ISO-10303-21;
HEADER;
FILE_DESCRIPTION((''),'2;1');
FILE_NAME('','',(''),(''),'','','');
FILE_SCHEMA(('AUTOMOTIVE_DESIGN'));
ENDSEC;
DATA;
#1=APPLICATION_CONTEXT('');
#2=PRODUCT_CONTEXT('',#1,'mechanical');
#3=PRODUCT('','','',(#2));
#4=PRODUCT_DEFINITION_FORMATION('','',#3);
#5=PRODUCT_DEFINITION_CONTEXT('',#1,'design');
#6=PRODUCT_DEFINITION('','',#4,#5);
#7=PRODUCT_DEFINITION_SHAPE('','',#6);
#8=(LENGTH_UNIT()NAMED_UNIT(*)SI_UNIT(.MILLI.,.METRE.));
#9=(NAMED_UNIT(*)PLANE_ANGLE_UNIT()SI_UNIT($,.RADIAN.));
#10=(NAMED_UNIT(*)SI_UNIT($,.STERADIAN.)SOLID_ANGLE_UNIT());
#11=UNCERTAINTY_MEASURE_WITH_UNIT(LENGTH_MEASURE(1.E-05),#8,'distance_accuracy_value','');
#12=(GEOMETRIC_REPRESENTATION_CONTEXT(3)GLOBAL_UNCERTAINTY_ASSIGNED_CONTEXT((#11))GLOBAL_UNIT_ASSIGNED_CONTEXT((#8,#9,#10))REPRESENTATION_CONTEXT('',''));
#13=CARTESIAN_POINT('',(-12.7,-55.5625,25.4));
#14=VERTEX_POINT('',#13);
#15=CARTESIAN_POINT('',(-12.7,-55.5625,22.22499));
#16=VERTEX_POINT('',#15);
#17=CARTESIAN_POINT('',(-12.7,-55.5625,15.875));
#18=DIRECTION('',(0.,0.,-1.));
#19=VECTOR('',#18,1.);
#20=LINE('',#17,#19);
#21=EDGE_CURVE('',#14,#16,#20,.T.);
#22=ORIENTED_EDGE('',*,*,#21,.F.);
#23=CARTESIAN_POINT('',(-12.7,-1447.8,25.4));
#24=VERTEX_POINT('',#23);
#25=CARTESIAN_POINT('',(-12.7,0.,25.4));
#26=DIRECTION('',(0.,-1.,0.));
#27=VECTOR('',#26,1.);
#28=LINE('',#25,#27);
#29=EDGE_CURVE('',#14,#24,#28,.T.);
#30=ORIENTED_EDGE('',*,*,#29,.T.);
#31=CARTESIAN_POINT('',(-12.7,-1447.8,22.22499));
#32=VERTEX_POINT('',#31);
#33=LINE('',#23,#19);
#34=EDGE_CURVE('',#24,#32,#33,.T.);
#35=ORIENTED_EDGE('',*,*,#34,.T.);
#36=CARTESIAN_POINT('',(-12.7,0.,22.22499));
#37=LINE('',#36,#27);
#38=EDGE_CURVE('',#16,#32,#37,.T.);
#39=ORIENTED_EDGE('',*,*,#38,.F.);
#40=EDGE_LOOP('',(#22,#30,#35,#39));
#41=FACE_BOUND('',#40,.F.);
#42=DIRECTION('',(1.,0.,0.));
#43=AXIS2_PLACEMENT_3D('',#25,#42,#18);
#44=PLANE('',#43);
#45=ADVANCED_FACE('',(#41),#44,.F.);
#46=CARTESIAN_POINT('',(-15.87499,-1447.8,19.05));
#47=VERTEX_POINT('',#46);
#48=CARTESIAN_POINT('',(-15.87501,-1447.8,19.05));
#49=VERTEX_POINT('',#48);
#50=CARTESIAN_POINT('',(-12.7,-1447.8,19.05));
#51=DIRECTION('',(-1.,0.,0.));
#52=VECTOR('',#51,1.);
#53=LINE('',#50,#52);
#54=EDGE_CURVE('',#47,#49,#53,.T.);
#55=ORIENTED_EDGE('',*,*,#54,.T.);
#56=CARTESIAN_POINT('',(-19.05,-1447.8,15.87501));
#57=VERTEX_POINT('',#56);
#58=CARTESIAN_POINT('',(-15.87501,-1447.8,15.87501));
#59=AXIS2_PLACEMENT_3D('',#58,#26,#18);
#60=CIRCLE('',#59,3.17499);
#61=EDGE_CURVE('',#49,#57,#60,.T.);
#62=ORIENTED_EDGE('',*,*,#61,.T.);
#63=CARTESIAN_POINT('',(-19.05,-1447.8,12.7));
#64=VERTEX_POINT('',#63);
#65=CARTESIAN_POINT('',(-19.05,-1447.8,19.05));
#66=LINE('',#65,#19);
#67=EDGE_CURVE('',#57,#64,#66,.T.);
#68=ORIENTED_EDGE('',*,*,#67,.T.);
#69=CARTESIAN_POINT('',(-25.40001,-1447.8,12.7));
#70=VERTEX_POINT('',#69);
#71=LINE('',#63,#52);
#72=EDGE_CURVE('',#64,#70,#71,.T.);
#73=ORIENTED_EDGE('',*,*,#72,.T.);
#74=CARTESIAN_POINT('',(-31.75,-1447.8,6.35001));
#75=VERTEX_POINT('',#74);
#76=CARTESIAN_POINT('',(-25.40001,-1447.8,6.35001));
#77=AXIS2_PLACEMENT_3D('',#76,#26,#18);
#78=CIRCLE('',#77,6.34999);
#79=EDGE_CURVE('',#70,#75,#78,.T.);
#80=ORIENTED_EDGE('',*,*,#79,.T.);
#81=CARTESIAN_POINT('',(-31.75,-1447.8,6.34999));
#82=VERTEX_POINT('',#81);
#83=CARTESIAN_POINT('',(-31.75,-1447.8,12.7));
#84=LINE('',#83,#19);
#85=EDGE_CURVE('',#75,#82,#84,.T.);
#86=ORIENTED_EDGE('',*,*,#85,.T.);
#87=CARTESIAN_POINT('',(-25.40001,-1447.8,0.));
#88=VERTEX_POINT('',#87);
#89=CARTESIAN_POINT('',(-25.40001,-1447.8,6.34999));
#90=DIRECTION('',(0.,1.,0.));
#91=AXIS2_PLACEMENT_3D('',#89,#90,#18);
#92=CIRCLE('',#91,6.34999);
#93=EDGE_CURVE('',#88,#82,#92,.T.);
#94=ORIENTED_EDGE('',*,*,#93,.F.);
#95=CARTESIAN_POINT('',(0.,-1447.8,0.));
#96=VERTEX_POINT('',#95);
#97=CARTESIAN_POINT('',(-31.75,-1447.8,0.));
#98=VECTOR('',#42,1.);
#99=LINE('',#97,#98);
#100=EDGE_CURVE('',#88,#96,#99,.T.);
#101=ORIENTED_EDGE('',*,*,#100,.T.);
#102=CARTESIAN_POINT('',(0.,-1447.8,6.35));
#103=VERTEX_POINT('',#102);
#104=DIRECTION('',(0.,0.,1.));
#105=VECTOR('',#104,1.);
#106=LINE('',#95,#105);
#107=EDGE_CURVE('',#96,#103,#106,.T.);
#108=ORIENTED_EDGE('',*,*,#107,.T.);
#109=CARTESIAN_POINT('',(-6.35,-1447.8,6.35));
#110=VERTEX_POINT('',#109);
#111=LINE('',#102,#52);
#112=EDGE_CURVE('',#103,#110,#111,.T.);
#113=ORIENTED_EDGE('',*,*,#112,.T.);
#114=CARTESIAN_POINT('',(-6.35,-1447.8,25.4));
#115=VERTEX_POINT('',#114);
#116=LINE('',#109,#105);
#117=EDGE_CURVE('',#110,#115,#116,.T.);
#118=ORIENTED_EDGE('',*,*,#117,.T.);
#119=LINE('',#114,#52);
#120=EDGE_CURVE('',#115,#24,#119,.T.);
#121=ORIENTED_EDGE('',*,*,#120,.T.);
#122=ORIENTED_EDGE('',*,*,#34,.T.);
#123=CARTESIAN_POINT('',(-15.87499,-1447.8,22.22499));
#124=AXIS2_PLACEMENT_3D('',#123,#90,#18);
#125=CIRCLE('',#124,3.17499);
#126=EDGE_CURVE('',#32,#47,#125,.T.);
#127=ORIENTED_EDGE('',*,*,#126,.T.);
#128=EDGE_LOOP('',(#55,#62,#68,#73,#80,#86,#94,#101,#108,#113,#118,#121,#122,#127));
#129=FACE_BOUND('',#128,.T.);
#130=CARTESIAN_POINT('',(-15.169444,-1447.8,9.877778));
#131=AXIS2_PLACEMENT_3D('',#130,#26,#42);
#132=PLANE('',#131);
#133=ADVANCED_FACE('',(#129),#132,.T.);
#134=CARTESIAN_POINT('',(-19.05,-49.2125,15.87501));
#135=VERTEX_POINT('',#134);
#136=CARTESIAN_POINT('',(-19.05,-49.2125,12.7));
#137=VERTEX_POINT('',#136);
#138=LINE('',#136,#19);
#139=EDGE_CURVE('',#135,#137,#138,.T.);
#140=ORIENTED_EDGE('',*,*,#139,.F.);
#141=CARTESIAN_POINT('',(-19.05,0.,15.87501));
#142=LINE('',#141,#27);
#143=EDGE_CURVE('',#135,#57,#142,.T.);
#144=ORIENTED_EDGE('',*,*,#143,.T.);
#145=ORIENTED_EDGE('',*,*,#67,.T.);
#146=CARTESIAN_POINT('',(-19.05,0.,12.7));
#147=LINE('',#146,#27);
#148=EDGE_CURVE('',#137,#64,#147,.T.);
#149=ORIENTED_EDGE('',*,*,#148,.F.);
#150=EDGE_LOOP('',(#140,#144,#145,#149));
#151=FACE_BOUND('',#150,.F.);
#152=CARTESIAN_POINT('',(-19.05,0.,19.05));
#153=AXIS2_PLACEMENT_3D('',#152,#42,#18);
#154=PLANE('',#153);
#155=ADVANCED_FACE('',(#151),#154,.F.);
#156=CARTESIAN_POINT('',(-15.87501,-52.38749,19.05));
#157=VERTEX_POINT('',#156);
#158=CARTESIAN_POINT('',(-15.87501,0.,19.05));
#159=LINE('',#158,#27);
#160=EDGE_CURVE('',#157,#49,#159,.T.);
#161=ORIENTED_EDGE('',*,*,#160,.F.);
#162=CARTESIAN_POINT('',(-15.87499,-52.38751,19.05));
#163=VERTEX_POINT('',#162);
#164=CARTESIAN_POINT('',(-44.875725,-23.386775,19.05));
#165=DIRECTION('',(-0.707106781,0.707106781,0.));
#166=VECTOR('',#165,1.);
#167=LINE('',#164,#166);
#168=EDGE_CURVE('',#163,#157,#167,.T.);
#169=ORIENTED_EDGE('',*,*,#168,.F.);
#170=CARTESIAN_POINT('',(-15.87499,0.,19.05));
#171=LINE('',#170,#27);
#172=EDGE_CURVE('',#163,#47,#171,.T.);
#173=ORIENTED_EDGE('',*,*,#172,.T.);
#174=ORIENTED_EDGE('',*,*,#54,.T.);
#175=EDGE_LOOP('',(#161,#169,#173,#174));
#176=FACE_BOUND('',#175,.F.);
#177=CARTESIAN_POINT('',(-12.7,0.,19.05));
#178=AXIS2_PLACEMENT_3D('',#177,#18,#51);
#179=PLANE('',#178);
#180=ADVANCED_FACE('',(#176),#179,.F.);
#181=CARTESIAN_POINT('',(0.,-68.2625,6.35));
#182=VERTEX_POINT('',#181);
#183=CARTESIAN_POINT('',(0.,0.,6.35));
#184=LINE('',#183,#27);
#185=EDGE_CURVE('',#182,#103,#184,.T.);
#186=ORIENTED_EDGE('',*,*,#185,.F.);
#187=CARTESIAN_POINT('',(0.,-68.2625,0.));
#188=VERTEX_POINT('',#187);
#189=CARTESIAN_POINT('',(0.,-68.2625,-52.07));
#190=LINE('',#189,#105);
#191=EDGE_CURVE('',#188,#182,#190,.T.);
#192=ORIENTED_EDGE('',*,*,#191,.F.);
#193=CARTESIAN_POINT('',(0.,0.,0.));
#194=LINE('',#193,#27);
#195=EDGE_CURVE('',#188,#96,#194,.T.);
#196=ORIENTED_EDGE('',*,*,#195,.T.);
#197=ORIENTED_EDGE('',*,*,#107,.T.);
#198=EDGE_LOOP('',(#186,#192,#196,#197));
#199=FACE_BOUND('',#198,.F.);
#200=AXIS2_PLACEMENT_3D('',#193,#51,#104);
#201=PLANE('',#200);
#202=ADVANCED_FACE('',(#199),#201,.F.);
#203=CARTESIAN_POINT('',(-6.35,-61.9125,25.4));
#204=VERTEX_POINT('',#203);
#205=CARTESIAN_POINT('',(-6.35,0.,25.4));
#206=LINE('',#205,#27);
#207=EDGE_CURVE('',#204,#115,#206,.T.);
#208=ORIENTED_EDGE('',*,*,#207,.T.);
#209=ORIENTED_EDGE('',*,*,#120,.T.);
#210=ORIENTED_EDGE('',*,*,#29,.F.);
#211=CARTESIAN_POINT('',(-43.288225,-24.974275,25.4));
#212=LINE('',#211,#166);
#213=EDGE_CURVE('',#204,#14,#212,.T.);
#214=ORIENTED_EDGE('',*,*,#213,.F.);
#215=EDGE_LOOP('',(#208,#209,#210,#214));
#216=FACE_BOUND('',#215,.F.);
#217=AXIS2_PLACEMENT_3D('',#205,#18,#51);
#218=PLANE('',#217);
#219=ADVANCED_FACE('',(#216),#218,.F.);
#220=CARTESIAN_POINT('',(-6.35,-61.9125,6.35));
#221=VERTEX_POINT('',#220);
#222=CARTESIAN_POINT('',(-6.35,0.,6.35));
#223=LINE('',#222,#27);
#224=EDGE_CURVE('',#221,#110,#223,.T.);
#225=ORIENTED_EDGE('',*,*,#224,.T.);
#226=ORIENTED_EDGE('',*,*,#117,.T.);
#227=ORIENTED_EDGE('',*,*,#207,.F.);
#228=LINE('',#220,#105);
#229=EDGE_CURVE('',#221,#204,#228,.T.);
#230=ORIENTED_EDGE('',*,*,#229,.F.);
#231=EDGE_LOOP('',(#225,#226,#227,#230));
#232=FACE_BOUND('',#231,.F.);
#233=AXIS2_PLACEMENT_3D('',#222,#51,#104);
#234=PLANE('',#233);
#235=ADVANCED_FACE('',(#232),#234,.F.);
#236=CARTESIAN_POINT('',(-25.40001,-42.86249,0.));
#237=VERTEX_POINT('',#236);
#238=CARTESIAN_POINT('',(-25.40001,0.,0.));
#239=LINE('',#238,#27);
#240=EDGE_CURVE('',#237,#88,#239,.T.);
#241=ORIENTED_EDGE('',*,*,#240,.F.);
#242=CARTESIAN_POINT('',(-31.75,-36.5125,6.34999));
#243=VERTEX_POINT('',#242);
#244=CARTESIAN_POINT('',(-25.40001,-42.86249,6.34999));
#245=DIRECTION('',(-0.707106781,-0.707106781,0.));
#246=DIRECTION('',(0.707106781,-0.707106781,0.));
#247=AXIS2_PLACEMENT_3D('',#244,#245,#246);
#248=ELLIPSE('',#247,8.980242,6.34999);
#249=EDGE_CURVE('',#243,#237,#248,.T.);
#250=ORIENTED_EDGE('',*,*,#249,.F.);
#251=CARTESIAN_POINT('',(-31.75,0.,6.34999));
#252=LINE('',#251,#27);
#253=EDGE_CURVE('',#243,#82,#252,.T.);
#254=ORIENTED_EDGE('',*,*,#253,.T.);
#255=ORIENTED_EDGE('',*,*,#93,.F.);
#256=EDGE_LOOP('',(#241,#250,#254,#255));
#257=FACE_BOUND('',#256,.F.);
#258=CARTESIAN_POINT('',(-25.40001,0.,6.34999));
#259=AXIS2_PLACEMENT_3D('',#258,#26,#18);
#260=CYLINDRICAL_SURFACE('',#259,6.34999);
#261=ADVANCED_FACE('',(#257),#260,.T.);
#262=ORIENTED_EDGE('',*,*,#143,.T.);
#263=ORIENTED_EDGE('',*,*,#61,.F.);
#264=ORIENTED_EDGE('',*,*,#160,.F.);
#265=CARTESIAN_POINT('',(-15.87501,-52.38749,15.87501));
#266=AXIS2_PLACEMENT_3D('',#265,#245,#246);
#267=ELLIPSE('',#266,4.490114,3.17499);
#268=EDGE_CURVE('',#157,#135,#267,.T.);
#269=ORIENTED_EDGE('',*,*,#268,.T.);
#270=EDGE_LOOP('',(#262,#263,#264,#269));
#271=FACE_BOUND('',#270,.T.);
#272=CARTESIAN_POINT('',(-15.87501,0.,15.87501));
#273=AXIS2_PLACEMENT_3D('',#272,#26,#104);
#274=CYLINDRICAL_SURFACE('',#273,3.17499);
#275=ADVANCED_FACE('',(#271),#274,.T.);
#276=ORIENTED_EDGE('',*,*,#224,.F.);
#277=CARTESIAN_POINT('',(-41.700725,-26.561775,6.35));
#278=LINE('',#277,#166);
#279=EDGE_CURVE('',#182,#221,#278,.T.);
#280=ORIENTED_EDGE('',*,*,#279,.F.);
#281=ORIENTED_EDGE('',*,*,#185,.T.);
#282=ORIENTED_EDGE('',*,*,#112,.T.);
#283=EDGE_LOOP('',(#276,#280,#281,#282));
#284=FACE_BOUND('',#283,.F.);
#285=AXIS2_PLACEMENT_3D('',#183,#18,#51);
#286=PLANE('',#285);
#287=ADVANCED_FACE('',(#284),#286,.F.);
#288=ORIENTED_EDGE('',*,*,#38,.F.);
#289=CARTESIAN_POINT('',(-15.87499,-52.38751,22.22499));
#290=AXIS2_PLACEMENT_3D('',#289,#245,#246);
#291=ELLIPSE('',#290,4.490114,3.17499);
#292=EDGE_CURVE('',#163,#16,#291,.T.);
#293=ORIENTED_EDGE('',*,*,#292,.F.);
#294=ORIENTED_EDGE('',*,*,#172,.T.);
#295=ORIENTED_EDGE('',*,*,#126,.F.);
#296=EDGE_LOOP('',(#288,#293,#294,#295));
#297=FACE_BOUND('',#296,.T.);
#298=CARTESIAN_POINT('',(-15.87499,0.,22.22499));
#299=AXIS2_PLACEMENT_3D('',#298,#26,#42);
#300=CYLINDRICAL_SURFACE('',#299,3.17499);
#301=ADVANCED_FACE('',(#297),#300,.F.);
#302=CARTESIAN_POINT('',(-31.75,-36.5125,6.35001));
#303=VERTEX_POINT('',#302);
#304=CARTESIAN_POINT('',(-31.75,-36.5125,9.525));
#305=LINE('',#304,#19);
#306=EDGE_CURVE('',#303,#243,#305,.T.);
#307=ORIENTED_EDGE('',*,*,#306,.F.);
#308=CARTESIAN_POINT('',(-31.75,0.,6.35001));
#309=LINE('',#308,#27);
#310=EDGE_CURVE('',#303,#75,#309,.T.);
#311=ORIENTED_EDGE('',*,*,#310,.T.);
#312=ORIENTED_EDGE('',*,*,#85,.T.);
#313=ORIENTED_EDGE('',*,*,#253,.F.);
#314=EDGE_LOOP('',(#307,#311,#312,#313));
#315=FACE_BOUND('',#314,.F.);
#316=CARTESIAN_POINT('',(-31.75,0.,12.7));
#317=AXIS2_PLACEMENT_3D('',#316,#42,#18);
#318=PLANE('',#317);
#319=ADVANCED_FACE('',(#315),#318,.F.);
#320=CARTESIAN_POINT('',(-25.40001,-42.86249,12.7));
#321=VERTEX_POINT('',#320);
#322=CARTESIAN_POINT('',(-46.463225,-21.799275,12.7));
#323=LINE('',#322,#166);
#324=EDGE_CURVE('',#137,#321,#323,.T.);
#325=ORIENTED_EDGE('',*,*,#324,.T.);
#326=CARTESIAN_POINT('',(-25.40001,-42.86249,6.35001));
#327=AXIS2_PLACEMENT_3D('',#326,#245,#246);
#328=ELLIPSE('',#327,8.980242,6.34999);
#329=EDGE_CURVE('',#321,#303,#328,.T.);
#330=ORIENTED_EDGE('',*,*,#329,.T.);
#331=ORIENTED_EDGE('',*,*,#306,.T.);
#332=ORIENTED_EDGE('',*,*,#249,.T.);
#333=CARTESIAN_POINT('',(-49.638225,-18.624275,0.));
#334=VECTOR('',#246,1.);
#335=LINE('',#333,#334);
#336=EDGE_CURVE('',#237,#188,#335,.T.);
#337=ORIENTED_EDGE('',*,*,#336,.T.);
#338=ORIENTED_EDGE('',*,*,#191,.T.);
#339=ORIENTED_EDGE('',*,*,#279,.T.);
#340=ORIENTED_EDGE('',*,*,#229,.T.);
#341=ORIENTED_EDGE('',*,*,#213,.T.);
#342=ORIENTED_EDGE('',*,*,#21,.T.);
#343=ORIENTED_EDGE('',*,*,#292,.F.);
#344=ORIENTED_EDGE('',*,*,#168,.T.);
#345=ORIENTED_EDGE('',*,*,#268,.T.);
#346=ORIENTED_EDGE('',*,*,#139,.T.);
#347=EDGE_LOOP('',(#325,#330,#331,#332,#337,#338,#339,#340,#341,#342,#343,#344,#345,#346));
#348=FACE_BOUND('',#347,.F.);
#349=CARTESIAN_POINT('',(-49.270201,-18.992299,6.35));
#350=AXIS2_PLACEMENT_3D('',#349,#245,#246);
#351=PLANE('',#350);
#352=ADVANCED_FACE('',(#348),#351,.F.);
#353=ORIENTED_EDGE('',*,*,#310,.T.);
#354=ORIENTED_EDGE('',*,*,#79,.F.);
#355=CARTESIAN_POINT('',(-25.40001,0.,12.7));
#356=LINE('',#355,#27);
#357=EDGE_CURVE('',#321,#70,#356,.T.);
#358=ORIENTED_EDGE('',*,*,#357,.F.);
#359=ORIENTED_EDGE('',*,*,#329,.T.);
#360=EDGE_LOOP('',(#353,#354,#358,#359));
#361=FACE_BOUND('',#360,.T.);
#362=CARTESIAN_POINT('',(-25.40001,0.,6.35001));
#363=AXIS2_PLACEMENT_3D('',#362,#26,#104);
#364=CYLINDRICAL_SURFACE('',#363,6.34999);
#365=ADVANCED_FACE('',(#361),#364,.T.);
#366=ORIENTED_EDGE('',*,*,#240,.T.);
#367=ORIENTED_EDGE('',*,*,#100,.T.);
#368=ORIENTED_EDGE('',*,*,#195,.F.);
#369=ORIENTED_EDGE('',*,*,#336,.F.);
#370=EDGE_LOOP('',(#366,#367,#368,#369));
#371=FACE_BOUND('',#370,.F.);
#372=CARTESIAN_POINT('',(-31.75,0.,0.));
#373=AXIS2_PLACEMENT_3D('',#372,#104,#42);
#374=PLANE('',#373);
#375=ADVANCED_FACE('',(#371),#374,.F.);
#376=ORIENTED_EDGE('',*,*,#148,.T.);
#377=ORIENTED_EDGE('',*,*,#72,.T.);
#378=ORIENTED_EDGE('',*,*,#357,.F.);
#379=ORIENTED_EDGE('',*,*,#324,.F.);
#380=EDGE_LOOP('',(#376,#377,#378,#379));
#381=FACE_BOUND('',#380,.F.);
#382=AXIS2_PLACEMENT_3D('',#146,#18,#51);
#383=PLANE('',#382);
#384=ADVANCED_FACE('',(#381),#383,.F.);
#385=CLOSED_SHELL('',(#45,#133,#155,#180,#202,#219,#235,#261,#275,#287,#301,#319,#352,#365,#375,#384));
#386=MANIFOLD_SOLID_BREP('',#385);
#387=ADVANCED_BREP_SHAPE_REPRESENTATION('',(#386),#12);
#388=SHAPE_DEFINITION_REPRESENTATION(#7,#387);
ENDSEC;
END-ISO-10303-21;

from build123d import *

# Parameters (mm, degrees)
F1_DEPTH = 1447.8
F2_R     = 3.17499
F3_R     = 6.34999
F5_DEPTH = 58.42


# Not quite as in the source:
# - a fillet or chamfer is up to 0.001 mm smaller than in the source, because OpenCascade refuses the exact size


with BuildPart() as f1:
    # F0 (on Front) → F1 (new body)
    with BuildSketch(Plane.XZ):
        Polygon((-6.35, 6.35), (-6.35, 25.4), (-12.7, 25.4), (-12.7, 19.05), (-19.05, 19.05), (-19.05, 12.7), (-31.75, 12.7), (-31.75, 0), (0, 0), (0, 6.35), align=None)
    extrude(amount=F1_DEPTH)

    # F2 (radius 3.175 in the source; OpenCascade refuses exactly that, so slightly less here)
    f2_edges = [f1.edges().sort_by_distance(p)[0] for p in [
        (-12.7, -723.9, 19.05),
        (-19.05, -723.9, 19.05),
    ]]
    fillet(f2_edges, radius=F2_R)

    # F3 (radius 6.35 in the source; OpenCascade refuses exactly that, so slightly less here)
    f3_edges = [f1.edges().sort_by_distance(p)[0] for p in [
        (-31.75, -723.9, 12.7),
        (-31.75, -723.9, 0),
    ]]
    fillet(f3_edges, radius=F3_R)

    # F4 (on face) → F5 (cut, symmetric)
    with BuildSketch(Plane.XY.offset(6.35)):
        Polygon((-49.2702007145, -18.9922992855), (0, -68.2625), (0, 0), (-49.2702007145, 0), align=None)
    extrude(amount=F5_DEPTH, both=True, mode=Mode.SUBTRACT)


solid = f1.part
